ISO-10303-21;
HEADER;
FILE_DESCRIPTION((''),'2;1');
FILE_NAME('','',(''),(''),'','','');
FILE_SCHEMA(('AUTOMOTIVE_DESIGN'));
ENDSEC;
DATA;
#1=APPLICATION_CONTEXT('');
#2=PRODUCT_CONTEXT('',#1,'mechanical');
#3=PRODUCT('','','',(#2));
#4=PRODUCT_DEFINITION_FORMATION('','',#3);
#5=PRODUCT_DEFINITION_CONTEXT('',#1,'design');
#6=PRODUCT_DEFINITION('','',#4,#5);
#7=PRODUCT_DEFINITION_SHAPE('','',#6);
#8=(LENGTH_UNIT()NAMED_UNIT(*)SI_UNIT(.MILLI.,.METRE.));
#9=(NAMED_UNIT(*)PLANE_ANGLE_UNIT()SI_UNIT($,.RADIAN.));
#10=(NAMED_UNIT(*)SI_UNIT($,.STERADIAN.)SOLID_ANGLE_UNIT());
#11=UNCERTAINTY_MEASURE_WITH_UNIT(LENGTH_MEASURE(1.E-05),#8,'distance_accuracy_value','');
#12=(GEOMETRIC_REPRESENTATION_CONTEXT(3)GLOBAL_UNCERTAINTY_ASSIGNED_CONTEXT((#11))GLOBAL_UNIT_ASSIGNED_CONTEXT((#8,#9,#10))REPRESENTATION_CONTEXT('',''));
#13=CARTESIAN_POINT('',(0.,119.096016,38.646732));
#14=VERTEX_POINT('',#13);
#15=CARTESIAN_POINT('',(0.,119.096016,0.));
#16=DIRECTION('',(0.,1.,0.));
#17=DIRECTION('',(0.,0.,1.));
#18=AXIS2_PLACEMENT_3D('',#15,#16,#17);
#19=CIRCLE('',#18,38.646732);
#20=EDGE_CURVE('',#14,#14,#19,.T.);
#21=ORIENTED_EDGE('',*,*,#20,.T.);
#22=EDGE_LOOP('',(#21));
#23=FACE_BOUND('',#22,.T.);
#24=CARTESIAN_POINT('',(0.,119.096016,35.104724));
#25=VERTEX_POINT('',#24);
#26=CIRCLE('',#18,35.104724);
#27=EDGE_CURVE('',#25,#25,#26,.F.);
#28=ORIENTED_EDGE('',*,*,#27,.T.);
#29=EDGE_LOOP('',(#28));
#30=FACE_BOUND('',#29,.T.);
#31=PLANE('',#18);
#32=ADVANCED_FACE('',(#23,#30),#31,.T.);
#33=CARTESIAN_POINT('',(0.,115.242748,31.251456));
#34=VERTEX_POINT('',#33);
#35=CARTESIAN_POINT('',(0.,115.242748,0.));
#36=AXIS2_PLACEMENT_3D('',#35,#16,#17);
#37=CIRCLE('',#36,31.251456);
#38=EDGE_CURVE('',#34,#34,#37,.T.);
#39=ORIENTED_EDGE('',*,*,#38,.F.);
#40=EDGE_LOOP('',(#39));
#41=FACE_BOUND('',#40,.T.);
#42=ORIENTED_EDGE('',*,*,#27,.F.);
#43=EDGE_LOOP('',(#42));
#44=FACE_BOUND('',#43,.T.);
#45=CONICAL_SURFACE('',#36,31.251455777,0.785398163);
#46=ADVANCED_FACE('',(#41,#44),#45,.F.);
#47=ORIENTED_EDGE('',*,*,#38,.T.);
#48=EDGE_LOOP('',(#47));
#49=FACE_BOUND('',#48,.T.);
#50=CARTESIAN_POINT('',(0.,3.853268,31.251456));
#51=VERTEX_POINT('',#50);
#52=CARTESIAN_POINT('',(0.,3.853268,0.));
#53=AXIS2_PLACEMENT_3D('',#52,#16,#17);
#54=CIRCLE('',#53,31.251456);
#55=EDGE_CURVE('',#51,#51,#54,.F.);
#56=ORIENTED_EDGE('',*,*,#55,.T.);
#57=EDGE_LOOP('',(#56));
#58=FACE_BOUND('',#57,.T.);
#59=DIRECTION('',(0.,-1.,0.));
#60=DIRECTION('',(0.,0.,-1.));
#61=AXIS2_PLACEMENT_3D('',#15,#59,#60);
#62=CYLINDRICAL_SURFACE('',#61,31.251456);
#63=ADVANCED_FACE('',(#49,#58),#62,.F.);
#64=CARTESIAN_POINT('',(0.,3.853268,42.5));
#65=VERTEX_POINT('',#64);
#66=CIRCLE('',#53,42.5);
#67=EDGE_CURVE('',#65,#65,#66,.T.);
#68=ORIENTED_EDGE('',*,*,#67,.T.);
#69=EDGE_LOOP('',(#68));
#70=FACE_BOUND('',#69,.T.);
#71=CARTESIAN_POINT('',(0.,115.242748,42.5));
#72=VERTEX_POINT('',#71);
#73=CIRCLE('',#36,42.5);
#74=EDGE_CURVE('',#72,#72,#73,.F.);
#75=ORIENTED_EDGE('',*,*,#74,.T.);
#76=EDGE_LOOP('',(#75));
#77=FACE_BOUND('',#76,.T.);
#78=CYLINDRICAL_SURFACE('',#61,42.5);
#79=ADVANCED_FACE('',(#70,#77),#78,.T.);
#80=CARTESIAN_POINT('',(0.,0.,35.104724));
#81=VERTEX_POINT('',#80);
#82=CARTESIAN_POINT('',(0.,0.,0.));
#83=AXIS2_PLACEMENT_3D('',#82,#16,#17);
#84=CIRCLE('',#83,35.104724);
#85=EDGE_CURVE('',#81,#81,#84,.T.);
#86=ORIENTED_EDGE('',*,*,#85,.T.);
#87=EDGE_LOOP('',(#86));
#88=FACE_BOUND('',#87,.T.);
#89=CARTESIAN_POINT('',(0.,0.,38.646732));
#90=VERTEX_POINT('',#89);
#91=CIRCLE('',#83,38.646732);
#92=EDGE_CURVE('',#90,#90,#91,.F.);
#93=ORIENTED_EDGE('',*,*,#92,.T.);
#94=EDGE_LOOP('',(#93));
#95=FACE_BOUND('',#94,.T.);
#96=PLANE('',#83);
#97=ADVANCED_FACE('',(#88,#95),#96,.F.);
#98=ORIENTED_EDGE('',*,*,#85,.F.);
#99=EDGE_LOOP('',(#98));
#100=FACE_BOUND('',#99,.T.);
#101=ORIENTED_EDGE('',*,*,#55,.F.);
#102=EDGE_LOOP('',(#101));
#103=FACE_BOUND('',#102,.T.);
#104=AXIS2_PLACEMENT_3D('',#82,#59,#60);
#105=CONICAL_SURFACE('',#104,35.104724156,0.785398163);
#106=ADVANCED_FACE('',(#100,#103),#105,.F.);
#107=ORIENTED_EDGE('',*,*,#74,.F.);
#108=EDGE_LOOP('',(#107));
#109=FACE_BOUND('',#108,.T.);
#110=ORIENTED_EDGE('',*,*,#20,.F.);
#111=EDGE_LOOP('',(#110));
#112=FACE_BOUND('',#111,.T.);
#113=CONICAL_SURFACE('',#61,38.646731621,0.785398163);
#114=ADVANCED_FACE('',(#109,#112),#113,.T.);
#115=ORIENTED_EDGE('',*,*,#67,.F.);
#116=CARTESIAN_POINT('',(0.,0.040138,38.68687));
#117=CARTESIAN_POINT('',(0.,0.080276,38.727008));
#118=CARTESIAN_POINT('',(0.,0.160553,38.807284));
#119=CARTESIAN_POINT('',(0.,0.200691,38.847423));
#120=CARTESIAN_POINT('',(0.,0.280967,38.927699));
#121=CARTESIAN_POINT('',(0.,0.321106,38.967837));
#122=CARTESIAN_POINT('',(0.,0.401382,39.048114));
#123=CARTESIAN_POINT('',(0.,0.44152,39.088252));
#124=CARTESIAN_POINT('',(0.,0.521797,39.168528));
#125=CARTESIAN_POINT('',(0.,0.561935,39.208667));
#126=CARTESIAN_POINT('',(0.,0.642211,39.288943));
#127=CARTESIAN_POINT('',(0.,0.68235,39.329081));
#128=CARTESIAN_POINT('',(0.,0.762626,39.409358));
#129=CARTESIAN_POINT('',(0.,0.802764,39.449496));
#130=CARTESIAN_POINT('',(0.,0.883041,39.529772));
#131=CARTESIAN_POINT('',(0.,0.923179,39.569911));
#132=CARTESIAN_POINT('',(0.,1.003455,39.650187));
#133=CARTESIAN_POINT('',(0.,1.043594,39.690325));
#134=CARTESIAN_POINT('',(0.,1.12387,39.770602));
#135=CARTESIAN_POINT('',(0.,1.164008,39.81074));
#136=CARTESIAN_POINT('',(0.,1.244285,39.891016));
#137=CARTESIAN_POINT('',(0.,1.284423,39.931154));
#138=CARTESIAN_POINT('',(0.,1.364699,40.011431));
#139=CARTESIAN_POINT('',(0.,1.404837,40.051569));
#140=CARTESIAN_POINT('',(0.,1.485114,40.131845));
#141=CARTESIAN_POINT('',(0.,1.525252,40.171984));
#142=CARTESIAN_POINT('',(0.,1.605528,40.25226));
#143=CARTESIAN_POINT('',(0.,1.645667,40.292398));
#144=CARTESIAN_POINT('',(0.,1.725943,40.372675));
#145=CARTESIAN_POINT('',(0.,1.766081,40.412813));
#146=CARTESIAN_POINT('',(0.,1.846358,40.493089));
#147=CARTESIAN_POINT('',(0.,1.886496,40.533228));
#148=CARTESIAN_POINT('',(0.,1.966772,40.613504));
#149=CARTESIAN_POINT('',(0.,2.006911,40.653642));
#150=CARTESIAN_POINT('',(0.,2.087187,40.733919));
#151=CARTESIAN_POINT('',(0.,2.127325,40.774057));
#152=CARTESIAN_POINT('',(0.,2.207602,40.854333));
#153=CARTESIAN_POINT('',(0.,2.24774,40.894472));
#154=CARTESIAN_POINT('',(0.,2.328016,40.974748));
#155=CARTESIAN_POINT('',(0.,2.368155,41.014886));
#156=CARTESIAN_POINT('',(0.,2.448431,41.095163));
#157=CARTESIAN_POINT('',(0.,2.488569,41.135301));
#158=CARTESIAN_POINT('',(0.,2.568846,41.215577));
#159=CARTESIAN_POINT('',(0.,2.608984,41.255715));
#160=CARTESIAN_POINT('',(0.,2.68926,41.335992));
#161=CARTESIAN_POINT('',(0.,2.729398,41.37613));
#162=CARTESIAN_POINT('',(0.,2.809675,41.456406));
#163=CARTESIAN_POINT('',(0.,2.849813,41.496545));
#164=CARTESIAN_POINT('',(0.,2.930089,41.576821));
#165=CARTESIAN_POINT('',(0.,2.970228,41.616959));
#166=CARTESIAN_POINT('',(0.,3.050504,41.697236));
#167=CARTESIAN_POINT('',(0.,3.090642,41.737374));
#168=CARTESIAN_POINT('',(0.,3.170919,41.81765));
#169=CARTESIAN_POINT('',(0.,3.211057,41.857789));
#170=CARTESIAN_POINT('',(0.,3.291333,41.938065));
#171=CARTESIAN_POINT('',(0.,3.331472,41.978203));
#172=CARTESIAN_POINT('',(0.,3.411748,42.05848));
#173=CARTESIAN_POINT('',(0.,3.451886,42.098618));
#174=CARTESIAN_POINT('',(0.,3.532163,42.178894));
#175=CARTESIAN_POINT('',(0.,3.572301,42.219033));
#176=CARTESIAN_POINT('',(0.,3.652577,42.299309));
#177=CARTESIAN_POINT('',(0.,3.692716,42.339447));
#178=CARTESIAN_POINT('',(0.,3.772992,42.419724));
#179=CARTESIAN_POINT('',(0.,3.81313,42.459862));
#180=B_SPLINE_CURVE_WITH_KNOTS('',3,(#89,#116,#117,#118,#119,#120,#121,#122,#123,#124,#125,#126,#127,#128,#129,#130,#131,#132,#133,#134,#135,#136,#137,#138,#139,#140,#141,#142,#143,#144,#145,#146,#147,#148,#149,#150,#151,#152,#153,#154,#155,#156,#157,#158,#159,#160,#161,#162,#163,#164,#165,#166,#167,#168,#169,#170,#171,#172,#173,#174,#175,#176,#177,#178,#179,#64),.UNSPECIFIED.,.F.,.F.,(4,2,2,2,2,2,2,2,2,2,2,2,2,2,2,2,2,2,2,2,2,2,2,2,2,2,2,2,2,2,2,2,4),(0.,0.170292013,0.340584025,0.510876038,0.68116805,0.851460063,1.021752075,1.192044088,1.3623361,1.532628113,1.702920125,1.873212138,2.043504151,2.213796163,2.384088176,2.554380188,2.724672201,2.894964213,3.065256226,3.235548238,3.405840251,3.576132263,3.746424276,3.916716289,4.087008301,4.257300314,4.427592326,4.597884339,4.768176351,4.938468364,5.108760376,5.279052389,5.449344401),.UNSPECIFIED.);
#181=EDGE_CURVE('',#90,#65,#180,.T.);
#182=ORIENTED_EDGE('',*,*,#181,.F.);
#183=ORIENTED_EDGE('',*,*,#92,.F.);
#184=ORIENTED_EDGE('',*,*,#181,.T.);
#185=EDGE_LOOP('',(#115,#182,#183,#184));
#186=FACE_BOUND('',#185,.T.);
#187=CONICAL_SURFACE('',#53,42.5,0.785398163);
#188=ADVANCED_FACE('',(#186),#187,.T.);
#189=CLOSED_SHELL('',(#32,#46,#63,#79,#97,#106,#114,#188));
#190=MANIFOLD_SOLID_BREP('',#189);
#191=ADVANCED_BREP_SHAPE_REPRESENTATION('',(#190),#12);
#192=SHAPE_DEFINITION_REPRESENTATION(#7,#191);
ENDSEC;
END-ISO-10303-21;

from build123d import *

# Parameters (mm, degrees)
SKETCH1_R           = 42.5
BOSS_EXTRUDE1_DEPTH = 119.096016081
SKETCH2_R           = 31.251455777
CUT_EXTRUDE1_DEPTH  = 134.403002389
CHAMFER1_SIZE       = 3.853268379


with BuildPart() as part:
    # Sketch1 → Boss-Extrude1 (new body)
    with BuildSketch(Plane(origin=(0, 0, 0), x_dir=(1, 0, 0), z_dir=(0, 1, 0))):
        Circle(SKETCH1_R)
    extrude(amount=BOSS_EXTRUDE1_DEPTH)

    # Sketch2 → Cut-Extrude1 (cut, through all)
    with BuildSketch(Plane(origin=(0, 0, 0), x_dir=(1, 0, 0), z_dir=(0, 1, 0))):
        Circle(SKETCH2_R)
    extrude(amount=CUT_EXTRUDE1_DEPTH, mode=Mode.SUBTRACT)

    # Chamfer1
    chamfer1_edges = [part.edges().sort_by_distance(p)[0] for p in [
        (-31.251455777, 119.096016081, 0),
        (-31.251455777, 0, 0),
        (-42.5, 0, 0),
        (-42.5, 119.096016081, 0),
    ]]
    chamfer(chamfer1_edges, length=CHAMFER1_SIZE)


solid = part.part
